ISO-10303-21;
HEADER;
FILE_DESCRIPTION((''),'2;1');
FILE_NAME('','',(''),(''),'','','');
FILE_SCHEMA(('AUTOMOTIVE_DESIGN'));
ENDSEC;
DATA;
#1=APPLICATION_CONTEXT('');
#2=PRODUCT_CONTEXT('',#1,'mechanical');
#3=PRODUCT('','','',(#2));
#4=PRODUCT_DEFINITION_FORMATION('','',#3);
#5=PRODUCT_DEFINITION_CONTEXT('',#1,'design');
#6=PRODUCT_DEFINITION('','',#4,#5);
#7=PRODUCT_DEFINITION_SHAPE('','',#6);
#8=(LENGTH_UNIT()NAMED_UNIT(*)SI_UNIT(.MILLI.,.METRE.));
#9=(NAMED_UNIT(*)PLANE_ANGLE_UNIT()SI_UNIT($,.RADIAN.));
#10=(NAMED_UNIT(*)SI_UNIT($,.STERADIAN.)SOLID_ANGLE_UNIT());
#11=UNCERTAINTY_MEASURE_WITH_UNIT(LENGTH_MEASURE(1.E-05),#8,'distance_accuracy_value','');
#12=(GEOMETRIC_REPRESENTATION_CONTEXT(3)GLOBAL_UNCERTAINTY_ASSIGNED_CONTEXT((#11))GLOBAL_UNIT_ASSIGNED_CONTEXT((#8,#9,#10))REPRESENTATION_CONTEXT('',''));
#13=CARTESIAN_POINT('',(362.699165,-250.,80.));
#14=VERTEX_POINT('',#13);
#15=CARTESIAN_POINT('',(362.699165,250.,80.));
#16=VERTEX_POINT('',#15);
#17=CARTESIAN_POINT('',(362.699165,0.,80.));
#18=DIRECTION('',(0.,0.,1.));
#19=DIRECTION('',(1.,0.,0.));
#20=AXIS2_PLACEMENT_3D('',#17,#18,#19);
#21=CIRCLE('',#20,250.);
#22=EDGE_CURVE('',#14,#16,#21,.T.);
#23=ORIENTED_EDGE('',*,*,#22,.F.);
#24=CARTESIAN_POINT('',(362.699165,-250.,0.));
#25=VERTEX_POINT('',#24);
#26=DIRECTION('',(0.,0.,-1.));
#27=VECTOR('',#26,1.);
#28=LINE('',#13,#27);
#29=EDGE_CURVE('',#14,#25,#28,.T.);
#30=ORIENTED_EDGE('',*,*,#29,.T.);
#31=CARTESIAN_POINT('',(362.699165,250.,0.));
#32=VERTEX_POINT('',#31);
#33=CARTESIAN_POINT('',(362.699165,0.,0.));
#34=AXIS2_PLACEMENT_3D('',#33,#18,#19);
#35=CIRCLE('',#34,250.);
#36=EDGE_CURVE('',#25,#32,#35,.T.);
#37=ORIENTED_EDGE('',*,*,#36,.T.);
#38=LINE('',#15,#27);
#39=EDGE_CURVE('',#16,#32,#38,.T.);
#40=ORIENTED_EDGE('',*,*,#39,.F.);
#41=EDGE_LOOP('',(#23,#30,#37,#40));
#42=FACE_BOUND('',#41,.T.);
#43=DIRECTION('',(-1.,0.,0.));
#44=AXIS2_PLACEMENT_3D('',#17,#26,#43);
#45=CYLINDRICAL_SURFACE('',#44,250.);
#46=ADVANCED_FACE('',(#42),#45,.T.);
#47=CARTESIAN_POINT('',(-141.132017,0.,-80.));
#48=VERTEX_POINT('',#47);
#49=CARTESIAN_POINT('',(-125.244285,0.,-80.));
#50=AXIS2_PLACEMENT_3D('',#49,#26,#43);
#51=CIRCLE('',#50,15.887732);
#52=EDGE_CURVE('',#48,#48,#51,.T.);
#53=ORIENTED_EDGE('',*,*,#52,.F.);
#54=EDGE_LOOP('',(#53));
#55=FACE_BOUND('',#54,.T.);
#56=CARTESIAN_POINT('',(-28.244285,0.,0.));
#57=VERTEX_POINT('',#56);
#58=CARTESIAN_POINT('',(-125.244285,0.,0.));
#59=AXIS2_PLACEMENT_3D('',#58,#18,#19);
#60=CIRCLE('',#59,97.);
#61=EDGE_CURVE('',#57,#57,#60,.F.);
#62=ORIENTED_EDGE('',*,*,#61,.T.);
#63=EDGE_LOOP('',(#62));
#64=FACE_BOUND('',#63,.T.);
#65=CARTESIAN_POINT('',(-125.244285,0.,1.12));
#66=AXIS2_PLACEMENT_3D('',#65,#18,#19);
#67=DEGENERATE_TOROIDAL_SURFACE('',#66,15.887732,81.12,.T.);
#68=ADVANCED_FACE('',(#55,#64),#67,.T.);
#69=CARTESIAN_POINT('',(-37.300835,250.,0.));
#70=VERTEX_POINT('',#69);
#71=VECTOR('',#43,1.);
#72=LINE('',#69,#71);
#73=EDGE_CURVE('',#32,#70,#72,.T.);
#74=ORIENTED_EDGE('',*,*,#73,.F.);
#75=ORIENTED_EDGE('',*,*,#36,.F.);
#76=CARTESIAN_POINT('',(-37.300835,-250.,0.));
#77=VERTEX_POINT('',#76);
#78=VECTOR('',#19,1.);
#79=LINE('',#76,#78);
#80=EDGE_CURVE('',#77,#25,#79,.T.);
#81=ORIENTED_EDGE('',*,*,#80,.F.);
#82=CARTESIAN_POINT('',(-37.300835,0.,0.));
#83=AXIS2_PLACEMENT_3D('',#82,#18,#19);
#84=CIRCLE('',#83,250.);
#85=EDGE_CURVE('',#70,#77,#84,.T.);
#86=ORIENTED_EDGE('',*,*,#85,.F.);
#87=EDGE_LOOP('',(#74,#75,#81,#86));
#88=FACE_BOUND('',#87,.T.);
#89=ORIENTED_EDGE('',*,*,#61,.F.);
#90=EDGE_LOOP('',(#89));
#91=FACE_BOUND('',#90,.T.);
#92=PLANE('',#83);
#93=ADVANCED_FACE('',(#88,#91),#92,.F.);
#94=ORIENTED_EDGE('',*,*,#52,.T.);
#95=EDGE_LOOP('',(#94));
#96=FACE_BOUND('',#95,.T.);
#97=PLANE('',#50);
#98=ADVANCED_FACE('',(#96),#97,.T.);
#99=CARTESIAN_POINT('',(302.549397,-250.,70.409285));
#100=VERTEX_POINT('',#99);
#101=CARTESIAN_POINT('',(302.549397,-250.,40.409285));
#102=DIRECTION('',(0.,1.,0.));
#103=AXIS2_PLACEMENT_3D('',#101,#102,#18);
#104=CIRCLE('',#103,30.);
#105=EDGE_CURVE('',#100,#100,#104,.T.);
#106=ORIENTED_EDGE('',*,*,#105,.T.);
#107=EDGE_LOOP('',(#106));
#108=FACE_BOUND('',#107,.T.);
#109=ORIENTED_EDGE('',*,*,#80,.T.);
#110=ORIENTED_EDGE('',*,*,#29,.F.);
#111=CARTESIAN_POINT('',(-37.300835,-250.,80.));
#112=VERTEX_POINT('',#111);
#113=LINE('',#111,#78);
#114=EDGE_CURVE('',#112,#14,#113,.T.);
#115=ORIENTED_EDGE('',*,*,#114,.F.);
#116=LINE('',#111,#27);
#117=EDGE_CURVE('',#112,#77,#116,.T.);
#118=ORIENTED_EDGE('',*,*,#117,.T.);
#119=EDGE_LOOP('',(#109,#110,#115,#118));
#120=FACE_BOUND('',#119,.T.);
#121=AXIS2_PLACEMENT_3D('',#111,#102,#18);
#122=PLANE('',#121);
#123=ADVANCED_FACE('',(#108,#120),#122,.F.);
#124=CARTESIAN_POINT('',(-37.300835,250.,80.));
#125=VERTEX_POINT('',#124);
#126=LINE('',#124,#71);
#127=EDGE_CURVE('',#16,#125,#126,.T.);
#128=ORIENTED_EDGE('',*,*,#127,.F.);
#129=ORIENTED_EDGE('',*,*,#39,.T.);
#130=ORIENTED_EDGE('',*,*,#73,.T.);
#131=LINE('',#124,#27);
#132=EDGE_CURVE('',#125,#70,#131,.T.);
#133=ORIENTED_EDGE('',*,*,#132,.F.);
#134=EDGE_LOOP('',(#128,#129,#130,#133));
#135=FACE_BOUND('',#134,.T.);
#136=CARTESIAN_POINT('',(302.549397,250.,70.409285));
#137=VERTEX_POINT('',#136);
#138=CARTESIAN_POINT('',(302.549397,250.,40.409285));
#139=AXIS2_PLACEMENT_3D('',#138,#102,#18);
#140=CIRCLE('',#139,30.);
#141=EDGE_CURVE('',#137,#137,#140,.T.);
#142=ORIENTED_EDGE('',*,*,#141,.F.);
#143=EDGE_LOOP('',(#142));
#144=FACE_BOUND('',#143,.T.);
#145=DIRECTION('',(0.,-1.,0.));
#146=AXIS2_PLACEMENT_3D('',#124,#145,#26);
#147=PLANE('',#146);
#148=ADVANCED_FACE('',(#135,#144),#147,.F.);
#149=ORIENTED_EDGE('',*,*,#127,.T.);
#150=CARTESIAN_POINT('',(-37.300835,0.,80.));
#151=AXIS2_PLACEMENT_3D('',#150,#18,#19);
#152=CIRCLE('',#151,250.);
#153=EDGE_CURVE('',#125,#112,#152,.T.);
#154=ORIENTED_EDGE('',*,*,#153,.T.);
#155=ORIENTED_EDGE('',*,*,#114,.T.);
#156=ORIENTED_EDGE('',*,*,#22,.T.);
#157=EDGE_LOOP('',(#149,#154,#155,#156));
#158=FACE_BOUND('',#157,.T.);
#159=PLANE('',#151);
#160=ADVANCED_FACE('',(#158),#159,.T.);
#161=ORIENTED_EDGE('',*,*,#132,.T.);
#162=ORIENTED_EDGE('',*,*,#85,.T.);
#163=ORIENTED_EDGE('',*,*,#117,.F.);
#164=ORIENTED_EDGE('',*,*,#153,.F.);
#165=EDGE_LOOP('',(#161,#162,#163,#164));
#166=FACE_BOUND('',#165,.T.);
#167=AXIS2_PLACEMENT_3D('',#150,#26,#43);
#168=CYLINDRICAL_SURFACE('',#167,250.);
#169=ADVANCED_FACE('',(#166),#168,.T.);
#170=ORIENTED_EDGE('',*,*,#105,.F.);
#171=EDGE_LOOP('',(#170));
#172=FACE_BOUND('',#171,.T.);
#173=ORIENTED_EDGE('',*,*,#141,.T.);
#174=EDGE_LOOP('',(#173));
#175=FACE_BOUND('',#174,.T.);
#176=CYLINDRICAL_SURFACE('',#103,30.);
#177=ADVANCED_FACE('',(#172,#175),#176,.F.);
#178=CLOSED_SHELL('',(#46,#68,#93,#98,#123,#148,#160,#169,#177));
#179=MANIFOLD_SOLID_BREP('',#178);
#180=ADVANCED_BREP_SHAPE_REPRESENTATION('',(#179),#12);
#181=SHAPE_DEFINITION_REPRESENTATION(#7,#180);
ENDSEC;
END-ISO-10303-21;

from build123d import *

# Parameters (mm, degrees)
BOSS_EXTRUDE1_DEPTH = 80
SKETCH2_R           = 30
CUT_EXTRUDE1_DEPTH  = 795.858645519
SKETCH4_R           = 97
BOSS_EXTRUDE3_DEPTH = 80
FILLET1_R           = 81.12


with BuildPart() as part:
    # Sketch1 → Boss-Extrude1 (new body)
    with BuildSketch(Plane.XY):
        with BuildLine():
            Line((-37.300835355, 250), (362.699164645, 250))
            ThreePointArc((362.699164645, 250), (612.699164645, 0), (362.699164645, -250))
            Line((362.699164645, -250), (-37.300835355, -250))
            ThreePointArc((-37.300835355, -250), (-287.300835355, 0), (-37.300835355, 250))
        make_face()
    extrude(amount=BOSS_EXTRUDE1_DEPTH)

    # Sketch2 → Cut-Extrude1 (cut, through all)
    with BuildSketch(Plane(origin=(0, 250, 0), x_dir=(1, 0, 0), z_dir=(0, 1, 0))):
        with Locations(Location((302.549396618, -40.40928544, 0), (0, 0, 270))):
            Circle(SKETCH2_R)
    extrude(amount=-CUT_EXTRUDE1_DEPTH, mode=Mode.SUBTRACT)

    # Sketch4 → Boss-Extrude3 (add)
    with BuildSketch(Plane(origin=(0, 0, 0), x_dir=(-1, 0, 0), z_dir=(0, 0, -1))):
        with Locations(Location((125.244285171, 0, 0), (0, 0, 180))):
            Circle(SKETCH4_R)
    extrude(amount=BOSS_EXTRUDE3_DEPTH)

    # Fillet1
    # the kernel refuses this fillet: 81.12 mm, written as the material it takes off along each edge
    with BuildSketch(Plane(origin=(-125.244285171, 0, -80), x_dir=(1, 0, 0), z_dir=(0, 1, 0))) as fillet1_piece_1:
        with BuildLine():
            CenterArc((15.887732124, -81.12), FILLET1_R, 0.791091124, 89.208908876)
            Line((15.887732124, 0), (15.887732124, 1.6224))
            Line((15.887732124, 1.6224), (97, 1.6224))
            Line((97, 1.6224), (98.6224, 0))
            ThreePointArc((98.6224, 0), (98.6224, -40), (98.622245358, -79.9776))
            Line((98.622245358, -79.9776), (97, -80))
        make_face()
    revolve(axis=Axis((-125.244285171, 0, -80), (0, 0, -1)), mode=Mode.SUBTRACT)


solid = part.part
